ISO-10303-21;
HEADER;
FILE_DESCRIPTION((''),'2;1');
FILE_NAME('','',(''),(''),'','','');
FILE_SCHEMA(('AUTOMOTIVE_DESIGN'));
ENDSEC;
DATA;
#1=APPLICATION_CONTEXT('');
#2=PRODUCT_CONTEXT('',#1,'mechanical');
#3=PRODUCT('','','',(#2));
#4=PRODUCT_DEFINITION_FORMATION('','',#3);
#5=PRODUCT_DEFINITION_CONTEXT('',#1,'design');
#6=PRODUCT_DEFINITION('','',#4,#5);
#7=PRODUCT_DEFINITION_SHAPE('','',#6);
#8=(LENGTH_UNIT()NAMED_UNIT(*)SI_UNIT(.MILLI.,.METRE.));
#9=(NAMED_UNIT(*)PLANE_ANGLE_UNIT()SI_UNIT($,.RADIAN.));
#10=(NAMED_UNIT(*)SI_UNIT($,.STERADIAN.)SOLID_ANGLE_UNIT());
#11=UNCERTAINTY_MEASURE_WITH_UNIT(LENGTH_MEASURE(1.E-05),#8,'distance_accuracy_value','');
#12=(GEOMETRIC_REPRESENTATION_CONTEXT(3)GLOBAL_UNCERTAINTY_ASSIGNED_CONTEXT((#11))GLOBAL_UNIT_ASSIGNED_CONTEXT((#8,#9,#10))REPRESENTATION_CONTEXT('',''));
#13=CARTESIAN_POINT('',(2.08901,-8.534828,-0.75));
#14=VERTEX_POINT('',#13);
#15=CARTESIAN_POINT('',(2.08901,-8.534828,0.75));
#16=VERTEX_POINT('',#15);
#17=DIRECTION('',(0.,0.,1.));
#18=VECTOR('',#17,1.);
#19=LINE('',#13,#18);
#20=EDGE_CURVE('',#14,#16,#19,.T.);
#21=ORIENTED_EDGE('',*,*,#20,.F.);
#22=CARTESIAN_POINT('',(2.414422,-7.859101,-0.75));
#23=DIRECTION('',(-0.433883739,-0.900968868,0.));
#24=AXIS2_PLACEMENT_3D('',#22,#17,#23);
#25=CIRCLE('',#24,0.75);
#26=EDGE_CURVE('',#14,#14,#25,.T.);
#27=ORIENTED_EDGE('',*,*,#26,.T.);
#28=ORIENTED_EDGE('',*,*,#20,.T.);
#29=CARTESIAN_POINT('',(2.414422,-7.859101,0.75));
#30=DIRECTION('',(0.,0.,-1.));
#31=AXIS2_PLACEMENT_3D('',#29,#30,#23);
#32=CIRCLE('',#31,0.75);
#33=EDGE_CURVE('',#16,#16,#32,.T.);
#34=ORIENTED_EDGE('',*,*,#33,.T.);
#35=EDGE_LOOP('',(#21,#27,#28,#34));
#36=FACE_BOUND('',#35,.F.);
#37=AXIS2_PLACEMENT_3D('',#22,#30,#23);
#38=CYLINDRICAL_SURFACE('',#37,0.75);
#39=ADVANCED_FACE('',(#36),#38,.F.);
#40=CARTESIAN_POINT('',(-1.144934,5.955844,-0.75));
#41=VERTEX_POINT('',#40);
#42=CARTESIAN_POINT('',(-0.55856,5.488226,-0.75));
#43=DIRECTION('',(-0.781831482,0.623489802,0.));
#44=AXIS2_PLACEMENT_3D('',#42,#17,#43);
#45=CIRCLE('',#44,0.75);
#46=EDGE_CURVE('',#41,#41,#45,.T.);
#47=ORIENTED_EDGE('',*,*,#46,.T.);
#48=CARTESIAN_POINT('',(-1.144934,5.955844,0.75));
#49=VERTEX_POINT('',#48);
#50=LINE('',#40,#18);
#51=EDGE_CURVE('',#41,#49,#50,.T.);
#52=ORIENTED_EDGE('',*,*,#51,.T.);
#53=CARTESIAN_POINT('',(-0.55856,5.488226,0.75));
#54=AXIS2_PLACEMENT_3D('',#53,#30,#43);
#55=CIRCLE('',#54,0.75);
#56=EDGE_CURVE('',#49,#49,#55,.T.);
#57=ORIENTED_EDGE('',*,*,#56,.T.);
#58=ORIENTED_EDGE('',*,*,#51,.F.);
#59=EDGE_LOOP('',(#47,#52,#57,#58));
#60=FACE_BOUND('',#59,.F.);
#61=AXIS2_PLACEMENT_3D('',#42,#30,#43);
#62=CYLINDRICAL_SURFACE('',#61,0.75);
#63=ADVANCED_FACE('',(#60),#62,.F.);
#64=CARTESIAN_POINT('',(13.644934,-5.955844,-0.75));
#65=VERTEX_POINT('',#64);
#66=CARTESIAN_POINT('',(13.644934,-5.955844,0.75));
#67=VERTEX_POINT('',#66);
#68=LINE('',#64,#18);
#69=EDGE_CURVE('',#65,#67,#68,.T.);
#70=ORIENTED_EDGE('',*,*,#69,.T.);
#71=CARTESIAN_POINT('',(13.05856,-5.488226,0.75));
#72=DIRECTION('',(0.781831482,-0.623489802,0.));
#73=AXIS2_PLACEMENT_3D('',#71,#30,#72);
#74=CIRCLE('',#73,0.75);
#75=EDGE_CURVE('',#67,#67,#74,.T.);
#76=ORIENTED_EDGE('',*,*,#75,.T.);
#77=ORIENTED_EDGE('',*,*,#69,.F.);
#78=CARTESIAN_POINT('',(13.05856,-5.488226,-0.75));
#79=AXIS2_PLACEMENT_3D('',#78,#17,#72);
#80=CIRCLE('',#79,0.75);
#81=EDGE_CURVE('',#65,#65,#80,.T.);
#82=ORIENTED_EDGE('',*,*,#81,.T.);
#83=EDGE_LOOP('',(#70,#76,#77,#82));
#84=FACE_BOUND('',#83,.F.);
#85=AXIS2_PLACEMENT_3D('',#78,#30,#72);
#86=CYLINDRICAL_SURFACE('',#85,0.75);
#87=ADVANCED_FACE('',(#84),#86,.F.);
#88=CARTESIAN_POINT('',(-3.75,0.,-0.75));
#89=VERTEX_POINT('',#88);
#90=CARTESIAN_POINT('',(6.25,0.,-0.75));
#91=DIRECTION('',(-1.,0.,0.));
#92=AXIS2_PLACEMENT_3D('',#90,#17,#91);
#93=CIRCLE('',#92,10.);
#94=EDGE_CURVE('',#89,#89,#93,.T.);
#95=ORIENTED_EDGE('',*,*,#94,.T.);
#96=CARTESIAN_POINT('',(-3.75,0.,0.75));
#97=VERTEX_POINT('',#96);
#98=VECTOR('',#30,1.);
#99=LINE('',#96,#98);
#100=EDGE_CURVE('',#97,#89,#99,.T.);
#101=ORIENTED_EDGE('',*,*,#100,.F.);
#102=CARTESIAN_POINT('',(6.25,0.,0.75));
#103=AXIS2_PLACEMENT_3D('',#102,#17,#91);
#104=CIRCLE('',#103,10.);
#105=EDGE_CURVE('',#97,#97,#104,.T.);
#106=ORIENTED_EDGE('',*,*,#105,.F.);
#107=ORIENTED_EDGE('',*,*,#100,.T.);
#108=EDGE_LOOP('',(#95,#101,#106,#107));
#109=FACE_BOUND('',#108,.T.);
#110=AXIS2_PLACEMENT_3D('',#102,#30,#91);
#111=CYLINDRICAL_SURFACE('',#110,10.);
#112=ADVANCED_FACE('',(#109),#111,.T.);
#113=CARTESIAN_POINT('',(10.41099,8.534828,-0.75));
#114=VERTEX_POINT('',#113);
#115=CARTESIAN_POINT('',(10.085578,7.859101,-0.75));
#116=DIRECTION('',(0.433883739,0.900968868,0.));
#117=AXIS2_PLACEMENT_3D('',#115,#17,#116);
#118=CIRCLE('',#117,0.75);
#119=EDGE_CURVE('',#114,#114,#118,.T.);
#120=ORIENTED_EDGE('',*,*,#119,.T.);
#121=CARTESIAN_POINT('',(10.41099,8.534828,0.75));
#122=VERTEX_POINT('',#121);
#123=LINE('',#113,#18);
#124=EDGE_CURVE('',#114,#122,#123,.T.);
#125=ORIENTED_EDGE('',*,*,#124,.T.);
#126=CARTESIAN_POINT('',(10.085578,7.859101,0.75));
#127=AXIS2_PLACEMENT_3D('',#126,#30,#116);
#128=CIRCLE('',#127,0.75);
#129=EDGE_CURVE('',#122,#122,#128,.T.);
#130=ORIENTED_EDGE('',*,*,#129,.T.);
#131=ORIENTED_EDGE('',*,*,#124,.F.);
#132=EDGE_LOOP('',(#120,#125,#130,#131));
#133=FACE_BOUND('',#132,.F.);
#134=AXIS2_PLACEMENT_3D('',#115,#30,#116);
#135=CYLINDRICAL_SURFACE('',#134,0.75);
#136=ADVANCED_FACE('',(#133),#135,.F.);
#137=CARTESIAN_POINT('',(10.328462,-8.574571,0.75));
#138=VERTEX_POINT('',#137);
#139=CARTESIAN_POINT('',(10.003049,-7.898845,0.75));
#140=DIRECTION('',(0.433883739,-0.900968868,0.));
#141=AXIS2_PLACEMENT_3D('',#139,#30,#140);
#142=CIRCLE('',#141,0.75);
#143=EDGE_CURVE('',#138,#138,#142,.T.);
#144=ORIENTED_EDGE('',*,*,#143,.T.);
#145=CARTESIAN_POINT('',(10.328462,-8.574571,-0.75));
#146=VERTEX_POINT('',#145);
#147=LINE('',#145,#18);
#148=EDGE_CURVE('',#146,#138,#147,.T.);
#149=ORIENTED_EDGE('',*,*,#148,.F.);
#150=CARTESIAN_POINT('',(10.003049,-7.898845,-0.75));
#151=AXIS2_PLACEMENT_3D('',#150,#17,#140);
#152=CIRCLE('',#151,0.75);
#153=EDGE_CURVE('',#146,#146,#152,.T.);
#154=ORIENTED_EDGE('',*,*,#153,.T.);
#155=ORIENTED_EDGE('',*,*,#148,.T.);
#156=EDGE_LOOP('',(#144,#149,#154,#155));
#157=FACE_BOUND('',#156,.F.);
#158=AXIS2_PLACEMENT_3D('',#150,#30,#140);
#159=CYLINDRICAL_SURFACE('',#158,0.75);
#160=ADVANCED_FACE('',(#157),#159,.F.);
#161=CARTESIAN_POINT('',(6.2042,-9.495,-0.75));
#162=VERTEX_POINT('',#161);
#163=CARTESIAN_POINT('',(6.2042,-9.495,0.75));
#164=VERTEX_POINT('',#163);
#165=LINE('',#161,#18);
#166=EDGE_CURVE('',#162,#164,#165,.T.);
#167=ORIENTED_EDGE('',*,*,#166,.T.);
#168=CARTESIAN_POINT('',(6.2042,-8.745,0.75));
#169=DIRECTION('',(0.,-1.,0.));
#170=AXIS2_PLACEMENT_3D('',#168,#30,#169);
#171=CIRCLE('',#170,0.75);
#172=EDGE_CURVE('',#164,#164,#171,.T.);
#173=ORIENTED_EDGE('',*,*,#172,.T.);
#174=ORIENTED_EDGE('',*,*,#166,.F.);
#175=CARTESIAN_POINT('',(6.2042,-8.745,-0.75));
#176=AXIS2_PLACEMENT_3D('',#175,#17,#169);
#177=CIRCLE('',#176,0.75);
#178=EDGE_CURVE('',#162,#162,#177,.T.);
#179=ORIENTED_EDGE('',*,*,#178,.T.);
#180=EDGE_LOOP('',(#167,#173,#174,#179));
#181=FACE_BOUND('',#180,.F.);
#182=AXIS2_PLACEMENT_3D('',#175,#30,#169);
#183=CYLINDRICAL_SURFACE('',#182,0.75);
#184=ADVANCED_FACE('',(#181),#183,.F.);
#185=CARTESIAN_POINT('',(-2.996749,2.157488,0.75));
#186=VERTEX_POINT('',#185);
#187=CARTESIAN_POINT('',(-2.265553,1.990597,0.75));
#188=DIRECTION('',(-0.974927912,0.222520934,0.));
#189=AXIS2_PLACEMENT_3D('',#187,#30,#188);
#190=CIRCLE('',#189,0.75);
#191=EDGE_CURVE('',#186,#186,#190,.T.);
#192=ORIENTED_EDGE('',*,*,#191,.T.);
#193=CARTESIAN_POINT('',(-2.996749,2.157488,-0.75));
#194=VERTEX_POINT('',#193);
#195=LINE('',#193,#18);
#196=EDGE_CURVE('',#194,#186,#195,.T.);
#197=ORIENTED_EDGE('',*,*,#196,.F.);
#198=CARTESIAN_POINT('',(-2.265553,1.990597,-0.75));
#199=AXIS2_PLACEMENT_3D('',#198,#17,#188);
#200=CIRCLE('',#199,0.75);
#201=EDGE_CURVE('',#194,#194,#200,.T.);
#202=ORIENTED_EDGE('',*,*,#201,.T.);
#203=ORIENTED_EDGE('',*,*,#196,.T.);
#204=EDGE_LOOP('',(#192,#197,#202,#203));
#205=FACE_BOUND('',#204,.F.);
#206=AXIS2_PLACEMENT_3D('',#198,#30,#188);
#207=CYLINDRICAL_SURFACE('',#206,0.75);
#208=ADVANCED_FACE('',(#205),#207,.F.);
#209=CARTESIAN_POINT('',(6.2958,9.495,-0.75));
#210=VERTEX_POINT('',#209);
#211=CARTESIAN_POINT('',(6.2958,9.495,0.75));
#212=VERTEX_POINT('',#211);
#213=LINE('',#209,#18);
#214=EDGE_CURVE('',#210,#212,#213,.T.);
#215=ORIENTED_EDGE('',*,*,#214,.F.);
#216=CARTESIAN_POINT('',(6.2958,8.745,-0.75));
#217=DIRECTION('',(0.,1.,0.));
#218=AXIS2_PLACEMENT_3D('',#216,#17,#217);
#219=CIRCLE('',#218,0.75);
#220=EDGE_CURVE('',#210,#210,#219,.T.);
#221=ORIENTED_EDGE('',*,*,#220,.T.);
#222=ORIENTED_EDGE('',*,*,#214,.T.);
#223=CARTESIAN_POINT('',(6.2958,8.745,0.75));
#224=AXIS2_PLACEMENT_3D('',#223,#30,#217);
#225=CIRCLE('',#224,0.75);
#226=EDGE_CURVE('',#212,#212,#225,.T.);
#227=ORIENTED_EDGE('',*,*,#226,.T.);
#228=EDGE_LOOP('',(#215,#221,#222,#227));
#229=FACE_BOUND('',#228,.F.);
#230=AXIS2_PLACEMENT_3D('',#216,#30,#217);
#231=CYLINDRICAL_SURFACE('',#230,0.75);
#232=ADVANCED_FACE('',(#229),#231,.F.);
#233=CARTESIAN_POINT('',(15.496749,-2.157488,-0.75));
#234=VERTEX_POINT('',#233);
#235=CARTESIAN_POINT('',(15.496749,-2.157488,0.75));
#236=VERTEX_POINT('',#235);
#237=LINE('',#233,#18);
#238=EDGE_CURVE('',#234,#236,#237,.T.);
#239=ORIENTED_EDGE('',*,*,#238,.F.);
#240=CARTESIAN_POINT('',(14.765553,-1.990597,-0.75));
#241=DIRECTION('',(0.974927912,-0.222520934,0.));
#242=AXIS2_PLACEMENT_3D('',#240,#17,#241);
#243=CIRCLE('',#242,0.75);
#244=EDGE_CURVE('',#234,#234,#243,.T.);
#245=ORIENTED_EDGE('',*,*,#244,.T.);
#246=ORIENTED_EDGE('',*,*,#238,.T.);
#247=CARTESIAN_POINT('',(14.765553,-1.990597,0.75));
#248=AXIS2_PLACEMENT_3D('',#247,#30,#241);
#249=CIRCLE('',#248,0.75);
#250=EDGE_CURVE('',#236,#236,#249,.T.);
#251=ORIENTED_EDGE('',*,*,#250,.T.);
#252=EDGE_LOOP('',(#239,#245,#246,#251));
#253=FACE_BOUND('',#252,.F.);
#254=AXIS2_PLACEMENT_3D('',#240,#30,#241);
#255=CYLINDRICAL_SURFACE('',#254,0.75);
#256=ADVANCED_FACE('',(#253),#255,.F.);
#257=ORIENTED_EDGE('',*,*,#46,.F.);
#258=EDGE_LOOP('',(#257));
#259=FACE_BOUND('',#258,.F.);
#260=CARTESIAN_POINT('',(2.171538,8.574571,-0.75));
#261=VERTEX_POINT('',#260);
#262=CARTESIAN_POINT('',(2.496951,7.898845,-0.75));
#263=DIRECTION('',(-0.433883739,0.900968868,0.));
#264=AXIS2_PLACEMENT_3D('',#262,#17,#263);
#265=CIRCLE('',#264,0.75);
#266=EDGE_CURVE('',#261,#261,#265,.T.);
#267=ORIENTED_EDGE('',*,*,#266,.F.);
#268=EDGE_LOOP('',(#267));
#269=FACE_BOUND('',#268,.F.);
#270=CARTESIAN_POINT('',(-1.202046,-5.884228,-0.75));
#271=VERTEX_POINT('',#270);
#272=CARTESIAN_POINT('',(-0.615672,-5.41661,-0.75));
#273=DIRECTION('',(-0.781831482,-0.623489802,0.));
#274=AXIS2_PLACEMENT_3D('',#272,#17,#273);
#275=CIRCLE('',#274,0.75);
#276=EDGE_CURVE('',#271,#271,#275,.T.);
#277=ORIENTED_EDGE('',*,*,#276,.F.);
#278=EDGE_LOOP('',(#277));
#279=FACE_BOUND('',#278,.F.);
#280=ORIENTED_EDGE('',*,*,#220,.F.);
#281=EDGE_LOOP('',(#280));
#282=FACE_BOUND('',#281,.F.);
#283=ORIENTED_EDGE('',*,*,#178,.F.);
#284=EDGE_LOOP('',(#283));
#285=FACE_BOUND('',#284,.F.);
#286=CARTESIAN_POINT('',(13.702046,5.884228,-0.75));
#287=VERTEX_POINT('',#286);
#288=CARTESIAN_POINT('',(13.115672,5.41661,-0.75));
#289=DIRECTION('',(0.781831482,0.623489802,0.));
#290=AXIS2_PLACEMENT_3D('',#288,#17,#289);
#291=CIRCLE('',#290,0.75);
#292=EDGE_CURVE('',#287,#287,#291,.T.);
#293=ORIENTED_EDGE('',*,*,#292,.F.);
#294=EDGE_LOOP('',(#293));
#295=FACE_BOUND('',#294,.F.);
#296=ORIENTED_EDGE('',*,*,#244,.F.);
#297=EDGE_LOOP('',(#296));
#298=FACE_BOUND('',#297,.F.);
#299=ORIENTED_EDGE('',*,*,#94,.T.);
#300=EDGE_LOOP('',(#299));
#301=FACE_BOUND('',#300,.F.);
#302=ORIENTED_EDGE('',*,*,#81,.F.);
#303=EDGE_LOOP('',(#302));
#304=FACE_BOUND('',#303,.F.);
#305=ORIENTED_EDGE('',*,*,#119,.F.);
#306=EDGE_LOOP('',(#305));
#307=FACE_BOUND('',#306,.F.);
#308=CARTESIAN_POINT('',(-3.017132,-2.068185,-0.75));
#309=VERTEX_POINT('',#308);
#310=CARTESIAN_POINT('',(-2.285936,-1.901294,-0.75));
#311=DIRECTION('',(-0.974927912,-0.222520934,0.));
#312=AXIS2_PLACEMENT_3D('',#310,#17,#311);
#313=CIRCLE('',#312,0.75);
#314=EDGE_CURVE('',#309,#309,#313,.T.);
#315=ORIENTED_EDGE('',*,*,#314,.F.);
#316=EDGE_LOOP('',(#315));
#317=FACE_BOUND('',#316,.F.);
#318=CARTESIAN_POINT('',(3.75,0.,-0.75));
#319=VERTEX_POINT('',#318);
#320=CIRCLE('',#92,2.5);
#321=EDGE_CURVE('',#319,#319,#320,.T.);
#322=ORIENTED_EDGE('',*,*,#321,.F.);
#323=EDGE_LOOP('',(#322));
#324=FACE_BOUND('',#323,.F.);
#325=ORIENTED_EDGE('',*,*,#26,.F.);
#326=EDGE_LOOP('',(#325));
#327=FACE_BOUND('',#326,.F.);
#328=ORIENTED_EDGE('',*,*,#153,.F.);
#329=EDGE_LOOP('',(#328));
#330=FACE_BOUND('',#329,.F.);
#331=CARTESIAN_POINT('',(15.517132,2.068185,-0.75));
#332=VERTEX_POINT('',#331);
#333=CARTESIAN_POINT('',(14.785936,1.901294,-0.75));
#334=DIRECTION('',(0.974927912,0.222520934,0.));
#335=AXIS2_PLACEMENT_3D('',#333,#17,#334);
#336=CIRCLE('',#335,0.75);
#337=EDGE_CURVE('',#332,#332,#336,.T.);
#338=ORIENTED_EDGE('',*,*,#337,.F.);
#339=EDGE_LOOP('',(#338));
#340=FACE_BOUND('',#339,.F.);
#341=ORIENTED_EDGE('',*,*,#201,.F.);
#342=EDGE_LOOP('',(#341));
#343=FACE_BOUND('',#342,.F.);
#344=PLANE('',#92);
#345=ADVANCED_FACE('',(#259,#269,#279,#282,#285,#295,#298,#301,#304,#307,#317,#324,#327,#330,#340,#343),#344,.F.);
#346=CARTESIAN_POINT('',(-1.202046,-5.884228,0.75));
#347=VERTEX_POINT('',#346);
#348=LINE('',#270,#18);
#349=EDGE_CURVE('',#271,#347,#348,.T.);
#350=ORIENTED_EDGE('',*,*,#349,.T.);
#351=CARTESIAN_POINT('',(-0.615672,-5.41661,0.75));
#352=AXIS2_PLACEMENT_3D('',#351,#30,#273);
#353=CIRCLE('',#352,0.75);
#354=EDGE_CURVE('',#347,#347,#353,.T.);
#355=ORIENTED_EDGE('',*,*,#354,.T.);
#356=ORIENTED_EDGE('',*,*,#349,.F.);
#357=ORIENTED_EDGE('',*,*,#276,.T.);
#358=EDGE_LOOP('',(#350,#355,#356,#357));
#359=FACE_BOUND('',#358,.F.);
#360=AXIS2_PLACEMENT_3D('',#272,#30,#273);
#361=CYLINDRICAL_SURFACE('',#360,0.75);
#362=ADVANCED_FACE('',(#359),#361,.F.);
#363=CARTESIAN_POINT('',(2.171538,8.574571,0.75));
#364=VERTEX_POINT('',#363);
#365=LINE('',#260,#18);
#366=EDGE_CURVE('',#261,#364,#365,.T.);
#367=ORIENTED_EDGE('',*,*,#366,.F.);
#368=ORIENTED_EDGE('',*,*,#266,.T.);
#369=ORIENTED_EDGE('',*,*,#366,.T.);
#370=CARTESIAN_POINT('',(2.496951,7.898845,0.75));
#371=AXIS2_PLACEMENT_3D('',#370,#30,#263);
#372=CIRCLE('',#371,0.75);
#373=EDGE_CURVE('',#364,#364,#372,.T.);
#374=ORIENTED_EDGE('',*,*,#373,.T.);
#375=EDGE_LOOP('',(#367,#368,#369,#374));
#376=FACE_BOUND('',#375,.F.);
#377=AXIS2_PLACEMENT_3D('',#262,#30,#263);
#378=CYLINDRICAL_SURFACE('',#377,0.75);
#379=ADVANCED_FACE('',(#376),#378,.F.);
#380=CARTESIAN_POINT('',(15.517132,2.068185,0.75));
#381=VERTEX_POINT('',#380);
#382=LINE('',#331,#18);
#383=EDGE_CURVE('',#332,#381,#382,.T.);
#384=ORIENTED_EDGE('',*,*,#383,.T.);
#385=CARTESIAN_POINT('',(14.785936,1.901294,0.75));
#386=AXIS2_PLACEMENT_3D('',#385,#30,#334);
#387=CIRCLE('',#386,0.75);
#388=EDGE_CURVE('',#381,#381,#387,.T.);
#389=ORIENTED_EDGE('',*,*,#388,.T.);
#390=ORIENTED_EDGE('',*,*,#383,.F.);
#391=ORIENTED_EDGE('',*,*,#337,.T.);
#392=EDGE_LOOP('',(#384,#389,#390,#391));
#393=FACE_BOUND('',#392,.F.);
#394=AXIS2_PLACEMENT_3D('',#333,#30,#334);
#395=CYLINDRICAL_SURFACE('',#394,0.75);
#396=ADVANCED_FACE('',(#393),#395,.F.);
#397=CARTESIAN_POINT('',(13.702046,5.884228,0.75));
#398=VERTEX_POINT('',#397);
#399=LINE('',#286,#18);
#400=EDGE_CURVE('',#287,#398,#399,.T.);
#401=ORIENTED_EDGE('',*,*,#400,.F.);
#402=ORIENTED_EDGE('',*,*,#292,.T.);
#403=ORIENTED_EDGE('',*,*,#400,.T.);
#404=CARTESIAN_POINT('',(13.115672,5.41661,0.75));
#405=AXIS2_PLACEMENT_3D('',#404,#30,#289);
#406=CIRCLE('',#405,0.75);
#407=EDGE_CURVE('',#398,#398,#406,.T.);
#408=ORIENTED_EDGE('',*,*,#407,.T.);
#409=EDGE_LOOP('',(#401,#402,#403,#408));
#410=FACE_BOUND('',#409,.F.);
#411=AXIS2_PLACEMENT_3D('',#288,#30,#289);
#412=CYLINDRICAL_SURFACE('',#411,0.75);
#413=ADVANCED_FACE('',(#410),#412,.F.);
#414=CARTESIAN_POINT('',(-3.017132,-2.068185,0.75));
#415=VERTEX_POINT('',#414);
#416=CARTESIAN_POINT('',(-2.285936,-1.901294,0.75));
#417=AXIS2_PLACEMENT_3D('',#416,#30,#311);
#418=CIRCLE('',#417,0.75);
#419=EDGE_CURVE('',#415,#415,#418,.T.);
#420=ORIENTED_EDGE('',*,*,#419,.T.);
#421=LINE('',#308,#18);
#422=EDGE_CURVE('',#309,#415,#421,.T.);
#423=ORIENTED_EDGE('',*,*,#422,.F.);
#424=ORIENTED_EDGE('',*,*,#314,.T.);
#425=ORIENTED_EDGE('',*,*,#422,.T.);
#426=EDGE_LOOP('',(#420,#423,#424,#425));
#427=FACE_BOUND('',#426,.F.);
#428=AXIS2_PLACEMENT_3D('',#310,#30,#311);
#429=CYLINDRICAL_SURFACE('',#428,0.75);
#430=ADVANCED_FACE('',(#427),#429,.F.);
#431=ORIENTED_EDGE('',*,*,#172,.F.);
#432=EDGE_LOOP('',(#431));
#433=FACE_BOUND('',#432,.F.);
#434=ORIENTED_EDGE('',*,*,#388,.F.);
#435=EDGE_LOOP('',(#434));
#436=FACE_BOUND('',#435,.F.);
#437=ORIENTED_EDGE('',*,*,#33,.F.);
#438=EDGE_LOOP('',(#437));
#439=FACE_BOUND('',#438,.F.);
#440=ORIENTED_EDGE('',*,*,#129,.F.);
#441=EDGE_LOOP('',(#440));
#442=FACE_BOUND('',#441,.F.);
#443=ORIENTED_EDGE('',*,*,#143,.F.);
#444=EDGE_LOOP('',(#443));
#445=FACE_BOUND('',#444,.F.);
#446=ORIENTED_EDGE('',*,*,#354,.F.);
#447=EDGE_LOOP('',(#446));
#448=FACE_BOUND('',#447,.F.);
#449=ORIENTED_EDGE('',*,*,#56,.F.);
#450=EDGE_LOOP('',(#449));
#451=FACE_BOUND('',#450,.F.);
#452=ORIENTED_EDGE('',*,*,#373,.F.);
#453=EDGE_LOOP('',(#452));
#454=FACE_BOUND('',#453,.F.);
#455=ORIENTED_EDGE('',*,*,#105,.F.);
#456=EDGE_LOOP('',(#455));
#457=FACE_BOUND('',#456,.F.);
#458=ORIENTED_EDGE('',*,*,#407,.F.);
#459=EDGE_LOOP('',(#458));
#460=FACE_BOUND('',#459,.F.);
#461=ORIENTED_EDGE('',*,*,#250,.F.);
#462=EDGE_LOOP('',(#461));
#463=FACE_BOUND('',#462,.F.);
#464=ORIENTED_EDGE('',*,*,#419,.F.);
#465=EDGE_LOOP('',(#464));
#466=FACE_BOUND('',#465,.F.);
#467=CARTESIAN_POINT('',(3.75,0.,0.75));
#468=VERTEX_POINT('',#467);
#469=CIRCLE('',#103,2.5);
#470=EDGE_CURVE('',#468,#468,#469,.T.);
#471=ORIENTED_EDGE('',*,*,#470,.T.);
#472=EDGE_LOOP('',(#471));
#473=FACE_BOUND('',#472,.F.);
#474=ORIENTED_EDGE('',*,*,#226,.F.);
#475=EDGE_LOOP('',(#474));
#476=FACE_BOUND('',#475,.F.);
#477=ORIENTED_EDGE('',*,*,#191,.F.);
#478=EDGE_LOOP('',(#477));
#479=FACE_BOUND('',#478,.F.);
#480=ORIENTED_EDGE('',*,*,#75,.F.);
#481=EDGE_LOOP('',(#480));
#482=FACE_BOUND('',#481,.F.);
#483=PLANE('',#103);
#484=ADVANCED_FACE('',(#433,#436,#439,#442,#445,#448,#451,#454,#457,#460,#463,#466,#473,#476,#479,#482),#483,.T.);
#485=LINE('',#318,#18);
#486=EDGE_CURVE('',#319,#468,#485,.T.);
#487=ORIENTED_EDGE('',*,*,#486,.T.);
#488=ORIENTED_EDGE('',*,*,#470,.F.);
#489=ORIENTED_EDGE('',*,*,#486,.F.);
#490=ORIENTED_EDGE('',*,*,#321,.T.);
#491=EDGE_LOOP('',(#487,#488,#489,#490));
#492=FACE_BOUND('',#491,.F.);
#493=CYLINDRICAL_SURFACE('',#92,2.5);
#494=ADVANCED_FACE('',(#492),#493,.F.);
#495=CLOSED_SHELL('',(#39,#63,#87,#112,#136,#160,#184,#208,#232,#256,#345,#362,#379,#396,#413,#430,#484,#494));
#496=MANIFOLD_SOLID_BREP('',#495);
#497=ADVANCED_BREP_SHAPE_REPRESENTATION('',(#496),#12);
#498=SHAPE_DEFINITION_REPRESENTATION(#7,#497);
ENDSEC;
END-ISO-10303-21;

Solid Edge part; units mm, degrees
sketch "Sketch1" plane through (0, 0, 0) normal (0, -1, 0) x (1, 0, 0)
  line L0 (3.75, 0.75) -> (-3.75, 0.75)
  line L1 (-3.75, 0.75) -> (-3.75, -0.75)
  line L2 (-3.75, -0.75) -> (3.75, -0.75)
  line L3 (3.75, -0.75) -> (3.75, 0.75)
  dimension "D1" = 2.5
revolve "RevolvedProtrusion1" add sketch "Sketch1" angle 360 about axis through (6.25, 0, -3.2815) along (0, 0, 1)
hole "Hole1" at (6.2958, 8.745, -0.75) direction (0, 0, 1) diameter 1.5 end up to next
pattern_circular "Pattern1" count 14 over 360 about axis through (6.25, 0, 0.75) along (0, 0, -1) of "Hole1"
